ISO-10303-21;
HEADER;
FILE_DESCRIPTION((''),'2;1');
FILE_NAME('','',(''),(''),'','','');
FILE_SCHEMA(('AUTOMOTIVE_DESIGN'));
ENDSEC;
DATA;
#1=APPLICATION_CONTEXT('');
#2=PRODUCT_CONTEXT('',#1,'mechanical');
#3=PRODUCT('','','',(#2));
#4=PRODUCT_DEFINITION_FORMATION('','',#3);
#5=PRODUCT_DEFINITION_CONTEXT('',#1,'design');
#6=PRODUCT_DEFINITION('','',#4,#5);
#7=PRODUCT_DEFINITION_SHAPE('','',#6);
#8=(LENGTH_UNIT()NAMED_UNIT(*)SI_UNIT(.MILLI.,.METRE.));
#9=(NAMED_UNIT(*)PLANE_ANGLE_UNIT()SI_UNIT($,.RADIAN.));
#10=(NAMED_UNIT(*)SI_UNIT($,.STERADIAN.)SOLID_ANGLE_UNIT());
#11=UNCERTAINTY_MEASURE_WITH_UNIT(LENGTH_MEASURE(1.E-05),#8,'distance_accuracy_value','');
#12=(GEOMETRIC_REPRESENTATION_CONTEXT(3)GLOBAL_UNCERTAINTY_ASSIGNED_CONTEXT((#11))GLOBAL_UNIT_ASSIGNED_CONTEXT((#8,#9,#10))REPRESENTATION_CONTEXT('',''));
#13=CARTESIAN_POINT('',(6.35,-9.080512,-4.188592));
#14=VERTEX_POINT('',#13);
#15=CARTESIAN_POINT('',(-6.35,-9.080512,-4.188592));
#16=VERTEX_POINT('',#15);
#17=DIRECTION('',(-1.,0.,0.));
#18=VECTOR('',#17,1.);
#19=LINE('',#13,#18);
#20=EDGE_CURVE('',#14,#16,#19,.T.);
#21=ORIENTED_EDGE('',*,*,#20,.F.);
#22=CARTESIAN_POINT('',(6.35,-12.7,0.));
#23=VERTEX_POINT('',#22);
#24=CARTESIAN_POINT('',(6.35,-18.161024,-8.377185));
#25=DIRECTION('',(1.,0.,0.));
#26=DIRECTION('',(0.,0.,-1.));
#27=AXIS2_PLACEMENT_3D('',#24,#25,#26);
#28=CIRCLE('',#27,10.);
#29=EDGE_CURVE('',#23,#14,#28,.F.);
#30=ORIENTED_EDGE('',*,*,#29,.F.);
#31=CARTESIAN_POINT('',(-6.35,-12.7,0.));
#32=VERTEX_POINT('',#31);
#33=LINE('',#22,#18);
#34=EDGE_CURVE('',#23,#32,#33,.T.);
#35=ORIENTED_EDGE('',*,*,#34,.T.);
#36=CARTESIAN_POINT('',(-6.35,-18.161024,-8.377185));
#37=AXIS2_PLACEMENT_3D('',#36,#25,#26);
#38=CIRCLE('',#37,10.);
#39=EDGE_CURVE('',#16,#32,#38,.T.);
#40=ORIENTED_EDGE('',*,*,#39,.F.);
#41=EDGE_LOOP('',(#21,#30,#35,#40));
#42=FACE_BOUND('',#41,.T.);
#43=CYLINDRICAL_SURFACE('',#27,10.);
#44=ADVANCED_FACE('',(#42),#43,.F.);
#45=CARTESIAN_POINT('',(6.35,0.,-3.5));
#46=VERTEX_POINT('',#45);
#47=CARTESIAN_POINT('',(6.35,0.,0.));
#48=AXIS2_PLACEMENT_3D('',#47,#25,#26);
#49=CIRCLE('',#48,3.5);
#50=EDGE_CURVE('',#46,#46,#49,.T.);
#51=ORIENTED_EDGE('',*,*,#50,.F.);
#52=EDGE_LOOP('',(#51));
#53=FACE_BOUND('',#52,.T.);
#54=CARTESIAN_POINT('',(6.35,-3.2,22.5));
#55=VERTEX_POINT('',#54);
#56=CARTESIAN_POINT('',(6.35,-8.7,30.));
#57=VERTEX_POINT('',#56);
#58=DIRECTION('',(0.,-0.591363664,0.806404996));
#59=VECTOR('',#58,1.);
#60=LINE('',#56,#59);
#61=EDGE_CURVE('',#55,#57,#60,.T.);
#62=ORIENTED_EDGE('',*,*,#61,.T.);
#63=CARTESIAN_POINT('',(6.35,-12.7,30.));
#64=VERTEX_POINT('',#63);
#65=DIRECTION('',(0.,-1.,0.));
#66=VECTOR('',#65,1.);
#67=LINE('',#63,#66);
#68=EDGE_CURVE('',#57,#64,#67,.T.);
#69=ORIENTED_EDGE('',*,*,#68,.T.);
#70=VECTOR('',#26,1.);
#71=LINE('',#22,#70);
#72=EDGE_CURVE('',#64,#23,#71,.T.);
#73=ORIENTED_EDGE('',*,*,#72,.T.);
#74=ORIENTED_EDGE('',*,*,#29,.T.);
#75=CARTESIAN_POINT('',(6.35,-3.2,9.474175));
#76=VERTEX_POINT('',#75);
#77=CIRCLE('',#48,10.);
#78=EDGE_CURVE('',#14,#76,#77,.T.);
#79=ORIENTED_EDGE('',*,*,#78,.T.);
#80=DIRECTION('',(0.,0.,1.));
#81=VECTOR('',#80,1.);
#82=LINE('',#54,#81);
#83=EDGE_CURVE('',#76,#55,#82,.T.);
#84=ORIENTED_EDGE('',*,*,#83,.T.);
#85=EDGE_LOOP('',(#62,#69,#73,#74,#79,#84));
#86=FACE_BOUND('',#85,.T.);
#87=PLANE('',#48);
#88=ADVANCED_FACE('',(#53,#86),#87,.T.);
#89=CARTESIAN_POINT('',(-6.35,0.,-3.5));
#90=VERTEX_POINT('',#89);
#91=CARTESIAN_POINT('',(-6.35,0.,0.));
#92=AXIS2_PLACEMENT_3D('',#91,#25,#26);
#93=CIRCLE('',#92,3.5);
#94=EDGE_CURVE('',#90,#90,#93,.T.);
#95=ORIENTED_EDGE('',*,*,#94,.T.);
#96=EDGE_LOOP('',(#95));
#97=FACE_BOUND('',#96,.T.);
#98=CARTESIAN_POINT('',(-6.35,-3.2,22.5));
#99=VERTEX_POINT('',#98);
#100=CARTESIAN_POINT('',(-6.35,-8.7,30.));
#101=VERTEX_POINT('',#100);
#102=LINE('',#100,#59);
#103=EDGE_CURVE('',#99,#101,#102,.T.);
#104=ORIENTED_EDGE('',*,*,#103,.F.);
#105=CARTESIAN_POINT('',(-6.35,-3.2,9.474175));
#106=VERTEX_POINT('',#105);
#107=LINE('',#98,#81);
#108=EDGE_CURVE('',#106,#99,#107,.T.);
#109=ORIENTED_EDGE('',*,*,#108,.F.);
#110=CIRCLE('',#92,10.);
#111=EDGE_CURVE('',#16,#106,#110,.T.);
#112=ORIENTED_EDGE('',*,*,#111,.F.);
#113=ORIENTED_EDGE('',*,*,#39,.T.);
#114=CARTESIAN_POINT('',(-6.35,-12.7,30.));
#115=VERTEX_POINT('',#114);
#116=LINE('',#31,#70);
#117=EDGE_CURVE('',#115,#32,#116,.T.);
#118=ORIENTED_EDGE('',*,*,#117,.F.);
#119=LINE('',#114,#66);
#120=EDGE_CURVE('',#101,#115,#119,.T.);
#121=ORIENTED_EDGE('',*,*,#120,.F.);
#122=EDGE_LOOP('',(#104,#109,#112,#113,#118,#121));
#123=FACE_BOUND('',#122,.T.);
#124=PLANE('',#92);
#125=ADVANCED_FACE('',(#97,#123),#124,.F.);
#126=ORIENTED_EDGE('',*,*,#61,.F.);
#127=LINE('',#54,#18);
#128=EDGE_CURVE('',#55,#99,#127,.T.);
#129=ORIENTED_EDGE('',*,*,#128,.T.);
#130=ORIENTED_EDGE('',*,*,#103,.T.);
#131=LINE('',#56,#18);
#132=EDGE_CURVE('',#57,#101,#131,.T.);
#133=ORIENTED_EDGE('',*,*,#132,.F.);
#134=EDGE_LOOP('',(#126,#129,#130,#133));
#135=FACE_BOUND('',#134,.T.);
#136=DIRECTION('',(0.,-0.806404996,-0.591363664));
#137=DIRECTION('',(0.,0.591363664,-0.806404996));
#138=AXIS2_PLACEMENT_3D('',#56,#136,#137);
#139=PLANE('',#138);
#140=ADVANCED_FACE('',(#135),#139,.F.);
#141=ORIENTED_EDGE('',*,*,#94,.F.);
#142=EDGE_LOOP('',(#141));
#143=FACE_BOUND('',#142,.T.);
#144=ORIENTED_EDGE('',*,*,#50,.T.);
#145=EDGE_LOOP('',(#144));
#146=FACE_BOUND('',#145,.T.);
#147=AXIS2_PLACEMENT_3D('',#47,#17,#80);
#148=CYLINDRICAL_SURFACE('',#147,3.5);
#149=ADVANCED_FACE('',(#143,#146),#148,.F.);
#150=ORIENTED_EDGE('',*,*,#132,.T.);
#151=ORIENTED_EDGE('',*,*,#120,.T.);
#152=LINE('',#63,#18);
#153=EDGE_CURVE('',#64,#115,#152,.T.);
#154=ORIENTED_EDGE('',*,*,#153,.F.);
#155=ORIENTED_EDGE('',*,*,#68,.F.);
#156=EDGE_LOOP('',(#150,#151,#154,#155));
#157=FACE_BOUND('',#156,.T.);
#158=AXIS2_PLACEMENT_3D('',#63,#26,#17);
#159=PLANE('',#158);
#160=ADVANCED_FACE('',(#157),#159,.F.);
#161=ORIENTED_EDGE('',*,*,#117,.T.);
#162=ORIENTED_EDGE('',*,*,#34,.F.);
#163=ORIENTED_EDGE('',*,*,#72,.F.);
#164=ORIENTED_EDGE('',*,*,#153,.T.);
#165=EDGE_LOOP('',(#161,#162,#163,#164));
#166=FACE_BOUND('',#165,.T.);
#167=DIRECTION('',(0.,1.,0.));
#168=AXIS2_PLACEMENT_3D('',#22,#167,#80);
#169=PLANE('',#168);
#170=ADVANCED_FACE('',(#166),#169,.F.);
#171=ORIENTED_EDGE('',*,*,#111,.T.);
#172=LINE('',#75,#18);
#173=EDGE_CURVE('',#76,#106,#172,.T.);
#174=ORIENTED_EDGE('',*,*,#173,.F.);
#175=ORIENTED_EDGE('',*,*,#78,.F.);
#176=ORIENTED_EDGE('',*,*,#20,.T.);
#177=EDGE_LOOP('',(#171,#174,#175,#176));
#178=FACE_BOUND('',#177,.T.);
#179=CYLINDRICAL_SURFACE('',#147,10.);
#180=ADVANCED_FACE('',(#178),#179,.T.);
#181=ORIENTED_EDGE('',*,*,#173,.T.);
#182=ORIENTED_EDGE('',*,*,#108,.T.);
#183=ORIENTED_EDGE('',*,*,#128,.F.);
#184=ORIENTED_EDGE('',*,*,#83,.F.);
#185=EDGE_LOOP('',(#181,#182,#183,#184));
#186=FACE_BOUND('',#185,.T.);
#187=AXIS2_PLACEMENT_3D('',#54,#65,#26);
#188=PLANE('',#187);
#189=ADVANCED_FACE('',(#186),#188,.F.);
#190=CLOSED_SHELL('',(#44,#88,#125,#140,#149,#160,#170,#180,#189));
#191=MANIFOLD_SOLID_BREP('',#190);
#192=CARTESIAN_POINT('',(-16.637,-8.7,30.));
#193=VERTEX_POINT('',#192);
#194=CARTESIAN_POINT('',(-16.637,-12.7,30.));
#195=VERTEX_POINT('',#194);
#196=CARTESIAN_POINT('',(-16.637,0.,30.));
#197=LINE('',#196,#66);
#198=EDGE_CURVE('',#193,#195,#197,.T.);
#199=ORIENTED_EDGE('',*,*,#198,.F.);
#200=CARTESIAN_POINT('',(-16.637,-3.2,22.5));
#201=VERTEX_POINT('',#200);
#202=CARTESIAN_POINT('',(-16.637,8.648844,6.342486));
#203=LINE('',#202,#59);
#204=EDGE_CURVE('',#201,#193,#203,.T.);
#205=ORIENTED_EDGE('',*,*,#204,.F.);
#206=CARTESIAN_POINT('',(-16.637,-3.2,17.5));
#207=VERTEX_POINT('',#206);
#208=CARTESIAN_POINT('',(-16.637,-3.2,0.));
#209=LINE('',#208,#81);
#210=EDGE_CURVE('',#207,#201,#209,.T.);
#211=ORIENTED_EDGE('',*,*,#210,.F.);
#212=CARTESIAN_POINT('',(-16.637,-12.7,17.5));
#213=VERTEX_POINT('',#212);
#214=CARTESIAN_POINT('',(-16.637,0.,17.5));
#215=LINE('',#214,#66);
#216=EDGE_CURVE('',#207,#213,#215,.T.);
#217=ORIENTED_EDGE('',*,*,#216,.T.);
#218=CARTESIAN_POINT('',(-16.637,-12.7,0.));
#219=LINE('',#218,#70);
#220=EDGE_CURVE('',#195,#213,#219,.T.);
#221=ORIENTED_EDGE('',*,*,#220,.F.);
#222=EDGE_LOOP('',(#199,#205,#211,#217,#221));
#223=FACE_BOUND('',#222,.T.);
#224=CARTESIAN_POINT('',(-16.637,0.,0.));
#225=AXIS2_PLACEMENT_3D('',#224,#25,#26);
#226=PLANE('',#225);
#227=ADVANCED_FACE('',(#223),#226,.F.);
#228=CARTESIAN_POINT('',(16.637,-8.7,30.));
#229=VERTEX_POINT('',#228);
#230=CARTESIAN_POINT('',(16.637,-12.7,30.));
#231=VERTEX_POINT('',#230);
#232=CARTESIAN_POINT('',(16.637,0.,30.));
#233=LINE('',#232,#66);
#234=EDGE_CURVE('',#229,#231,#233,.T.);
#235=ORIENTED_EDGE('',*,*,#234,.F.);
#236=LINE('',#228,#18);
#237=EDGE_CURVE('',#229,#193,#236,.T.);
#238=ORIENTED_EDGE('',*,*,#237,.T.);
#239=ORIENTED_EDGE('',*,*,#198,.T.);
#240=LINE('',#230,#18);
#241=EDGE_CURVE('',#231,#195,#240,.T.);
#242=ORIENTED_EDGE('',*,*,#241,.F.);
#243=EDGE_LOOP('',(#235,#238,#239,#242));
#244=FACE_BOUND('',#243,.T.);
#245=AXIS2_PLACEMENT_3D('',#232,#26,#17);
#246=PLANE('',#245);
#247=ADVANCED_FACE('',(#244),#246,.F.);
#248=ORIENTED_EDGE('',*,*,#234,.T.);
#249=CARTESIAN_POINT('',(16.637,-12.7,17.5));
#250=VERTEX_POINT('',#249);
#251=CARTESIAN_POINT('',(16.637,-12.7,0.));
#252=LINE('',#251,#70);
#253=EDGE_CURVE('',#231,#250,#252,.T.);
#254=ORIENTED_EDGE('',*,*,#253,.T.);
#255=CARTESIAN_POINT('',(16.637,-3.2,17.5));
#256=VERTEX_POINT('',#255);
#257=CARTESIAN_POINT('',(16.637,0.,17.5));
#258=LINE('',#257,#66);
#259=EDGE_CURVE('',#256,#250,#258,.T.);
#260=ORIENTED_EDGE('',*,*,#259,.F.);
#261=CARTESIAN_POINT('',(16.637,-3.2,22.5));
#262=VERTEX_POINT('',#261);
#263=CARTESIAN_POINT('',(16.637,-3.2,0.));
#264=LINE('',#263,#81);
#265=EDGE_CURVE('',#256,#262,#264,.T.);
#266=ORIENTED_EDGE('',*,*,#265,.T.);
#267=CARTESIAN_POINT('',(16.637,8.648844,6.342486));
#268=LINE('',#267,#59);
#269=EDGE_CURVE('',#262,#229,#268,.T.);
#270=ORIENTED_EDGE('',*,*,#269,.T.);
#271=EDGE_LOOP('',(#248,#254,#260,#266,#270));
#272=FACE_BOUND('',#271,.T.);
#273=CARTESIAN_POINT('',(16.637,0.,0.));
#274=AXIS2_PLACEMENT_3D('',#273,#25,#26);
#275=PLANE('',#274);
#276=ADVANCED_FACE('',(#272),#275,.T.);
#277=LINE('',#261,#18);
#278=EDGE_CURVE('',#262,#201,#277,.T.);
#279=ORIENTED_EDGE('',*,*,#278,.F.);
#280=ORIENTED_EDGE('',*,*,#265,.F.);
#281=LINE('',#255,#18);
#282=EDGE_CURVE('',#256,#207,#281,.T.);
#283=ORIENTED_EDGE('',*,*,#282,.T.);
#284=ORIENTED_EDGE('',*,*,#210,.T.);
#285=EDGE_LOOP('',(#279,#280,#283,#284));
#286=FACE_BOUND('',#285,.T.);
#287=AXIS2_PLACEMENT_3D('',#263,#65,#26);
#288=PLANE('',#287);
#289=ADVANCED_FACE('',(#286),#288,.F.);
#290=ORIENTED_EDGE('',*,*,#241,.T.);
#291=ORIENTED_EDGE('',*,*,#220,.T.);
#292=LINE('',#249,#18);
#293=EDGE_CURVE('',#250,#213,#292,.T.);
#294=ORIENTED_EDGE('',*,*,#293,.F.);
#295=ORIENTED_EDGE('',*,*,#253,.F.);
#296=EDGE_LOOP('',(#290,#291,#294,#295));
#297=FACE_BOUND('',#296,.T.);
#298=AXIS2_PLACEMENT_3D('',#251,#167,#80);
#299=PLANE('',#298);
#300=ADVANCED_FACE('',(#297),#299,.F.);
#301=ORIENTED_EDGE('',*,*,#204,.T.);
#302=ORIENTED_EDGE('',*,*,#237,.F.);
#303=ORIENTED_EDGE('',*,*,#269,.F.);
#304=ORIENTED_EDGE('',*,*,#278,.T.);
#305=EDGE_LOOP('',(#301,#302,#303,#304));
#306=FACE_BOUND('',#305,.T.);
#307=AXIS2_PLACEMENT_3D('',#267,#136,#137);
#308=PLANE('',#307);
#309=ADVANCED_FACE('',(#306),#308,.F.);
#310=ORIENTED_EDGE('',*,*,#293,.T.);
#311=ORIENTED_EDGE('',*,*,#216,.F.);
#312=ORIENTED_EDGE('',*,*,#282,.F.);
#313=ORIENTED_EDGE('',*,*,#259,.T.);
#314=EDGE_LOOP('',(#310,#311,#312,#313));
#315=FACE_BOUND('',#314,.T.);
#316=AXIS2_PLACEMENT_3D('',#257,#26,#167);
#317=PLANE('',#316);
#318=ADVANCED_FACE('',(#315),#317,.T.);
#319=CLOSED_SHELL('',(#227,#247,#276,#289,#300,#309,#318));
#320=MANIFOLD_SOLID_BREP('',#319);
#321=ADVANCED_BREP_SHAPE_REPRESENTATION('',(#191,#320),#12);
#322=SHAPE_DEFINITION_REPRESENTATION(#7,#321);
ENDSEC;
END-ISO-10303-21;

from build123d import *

# Parameters (mm, degrees)
SKETCH1_R           = 3.5
BOSS_EXTRUDE1_DEPTH = 6.35
BOSS_EXTRUDE2_DEPTH = 16.637
FILLET1_R           = 10


with BuildPart() as part:
    # Sketch1 → Boss-Extrude1 (new, symmetric)
    with BuildSketch(Plane(origin=(0, 0, 0), x_dir=(0, 0, -1), z_dir=(1, 0, 0))):
        with BuildLine():
            Line((0, -12.7), (-30, -12.7))
            Line((-30, -12.7), (-30, -8.7))
            Line((-30, -8.7), (-22.5, -3.2))
            Line((-22.5, -3.2), (-9.474175426, -3.2))
            ThreePointArc((-9.474175426, -3.2), (5.830951895, 8.124038405), (0, -10))
            Line((0, -10), (0, -12.7))
        make_face()
        Circle(SKETCH1_R, mode=Mode.SUBTRACT)
    extrude(amount=BOSS_EXTRUDE1_DEPTH, both=True)

    # Fillet1
    # the kernel refuses this fillet: 10 mm, written as the material it adds along each edge
    with BuildSketch(Plane(origin=(-6.35, -10, 0), x_dir=(0, -1, 0), z_dir=(1, 0, 0))) as fillet1_piece_1:
        with BuildLine():
            CenterArc((8.161023622, 8.377184551), FILLET1_R, 204.762586687, 32.137385873)
            Line((-0.919488189, 4.188592275), (-1.101098425, 4.10482043))
            ThreePointArc((-1.101098425, 4.10482043), (-0.427925109, 2.101281105), (-0.2, 0))
            Line((-0.2, 0), (0, -0.2))
            ThreePointArc((0, -0.2), (1.35, -0.2), (2.590779528, -0.167543691))
            Line((2.590779528, -0.167543691), (2.7, 0))
        make_face()
    extrude(amount=12.7)


with BuildPart() as body_2:
    # Sketch4 → Boss-Extrude2 (new, symmetric)
    with BuildSketch(Plane(origin=(0, 0, 0), x_dir=(0, 0, -1), z_dir=(1, 0, 0))):
        Polygon((-17.5, -3.2), (-17.5, -12.7), (-30, -12.7), (-30, -8.7), (-22.5, -3.2), align=None)
    extrude(amount=BOSS_EXTRUDE2_DEPTH, both=True)


solid = Compound([part.part, body_2.part])
